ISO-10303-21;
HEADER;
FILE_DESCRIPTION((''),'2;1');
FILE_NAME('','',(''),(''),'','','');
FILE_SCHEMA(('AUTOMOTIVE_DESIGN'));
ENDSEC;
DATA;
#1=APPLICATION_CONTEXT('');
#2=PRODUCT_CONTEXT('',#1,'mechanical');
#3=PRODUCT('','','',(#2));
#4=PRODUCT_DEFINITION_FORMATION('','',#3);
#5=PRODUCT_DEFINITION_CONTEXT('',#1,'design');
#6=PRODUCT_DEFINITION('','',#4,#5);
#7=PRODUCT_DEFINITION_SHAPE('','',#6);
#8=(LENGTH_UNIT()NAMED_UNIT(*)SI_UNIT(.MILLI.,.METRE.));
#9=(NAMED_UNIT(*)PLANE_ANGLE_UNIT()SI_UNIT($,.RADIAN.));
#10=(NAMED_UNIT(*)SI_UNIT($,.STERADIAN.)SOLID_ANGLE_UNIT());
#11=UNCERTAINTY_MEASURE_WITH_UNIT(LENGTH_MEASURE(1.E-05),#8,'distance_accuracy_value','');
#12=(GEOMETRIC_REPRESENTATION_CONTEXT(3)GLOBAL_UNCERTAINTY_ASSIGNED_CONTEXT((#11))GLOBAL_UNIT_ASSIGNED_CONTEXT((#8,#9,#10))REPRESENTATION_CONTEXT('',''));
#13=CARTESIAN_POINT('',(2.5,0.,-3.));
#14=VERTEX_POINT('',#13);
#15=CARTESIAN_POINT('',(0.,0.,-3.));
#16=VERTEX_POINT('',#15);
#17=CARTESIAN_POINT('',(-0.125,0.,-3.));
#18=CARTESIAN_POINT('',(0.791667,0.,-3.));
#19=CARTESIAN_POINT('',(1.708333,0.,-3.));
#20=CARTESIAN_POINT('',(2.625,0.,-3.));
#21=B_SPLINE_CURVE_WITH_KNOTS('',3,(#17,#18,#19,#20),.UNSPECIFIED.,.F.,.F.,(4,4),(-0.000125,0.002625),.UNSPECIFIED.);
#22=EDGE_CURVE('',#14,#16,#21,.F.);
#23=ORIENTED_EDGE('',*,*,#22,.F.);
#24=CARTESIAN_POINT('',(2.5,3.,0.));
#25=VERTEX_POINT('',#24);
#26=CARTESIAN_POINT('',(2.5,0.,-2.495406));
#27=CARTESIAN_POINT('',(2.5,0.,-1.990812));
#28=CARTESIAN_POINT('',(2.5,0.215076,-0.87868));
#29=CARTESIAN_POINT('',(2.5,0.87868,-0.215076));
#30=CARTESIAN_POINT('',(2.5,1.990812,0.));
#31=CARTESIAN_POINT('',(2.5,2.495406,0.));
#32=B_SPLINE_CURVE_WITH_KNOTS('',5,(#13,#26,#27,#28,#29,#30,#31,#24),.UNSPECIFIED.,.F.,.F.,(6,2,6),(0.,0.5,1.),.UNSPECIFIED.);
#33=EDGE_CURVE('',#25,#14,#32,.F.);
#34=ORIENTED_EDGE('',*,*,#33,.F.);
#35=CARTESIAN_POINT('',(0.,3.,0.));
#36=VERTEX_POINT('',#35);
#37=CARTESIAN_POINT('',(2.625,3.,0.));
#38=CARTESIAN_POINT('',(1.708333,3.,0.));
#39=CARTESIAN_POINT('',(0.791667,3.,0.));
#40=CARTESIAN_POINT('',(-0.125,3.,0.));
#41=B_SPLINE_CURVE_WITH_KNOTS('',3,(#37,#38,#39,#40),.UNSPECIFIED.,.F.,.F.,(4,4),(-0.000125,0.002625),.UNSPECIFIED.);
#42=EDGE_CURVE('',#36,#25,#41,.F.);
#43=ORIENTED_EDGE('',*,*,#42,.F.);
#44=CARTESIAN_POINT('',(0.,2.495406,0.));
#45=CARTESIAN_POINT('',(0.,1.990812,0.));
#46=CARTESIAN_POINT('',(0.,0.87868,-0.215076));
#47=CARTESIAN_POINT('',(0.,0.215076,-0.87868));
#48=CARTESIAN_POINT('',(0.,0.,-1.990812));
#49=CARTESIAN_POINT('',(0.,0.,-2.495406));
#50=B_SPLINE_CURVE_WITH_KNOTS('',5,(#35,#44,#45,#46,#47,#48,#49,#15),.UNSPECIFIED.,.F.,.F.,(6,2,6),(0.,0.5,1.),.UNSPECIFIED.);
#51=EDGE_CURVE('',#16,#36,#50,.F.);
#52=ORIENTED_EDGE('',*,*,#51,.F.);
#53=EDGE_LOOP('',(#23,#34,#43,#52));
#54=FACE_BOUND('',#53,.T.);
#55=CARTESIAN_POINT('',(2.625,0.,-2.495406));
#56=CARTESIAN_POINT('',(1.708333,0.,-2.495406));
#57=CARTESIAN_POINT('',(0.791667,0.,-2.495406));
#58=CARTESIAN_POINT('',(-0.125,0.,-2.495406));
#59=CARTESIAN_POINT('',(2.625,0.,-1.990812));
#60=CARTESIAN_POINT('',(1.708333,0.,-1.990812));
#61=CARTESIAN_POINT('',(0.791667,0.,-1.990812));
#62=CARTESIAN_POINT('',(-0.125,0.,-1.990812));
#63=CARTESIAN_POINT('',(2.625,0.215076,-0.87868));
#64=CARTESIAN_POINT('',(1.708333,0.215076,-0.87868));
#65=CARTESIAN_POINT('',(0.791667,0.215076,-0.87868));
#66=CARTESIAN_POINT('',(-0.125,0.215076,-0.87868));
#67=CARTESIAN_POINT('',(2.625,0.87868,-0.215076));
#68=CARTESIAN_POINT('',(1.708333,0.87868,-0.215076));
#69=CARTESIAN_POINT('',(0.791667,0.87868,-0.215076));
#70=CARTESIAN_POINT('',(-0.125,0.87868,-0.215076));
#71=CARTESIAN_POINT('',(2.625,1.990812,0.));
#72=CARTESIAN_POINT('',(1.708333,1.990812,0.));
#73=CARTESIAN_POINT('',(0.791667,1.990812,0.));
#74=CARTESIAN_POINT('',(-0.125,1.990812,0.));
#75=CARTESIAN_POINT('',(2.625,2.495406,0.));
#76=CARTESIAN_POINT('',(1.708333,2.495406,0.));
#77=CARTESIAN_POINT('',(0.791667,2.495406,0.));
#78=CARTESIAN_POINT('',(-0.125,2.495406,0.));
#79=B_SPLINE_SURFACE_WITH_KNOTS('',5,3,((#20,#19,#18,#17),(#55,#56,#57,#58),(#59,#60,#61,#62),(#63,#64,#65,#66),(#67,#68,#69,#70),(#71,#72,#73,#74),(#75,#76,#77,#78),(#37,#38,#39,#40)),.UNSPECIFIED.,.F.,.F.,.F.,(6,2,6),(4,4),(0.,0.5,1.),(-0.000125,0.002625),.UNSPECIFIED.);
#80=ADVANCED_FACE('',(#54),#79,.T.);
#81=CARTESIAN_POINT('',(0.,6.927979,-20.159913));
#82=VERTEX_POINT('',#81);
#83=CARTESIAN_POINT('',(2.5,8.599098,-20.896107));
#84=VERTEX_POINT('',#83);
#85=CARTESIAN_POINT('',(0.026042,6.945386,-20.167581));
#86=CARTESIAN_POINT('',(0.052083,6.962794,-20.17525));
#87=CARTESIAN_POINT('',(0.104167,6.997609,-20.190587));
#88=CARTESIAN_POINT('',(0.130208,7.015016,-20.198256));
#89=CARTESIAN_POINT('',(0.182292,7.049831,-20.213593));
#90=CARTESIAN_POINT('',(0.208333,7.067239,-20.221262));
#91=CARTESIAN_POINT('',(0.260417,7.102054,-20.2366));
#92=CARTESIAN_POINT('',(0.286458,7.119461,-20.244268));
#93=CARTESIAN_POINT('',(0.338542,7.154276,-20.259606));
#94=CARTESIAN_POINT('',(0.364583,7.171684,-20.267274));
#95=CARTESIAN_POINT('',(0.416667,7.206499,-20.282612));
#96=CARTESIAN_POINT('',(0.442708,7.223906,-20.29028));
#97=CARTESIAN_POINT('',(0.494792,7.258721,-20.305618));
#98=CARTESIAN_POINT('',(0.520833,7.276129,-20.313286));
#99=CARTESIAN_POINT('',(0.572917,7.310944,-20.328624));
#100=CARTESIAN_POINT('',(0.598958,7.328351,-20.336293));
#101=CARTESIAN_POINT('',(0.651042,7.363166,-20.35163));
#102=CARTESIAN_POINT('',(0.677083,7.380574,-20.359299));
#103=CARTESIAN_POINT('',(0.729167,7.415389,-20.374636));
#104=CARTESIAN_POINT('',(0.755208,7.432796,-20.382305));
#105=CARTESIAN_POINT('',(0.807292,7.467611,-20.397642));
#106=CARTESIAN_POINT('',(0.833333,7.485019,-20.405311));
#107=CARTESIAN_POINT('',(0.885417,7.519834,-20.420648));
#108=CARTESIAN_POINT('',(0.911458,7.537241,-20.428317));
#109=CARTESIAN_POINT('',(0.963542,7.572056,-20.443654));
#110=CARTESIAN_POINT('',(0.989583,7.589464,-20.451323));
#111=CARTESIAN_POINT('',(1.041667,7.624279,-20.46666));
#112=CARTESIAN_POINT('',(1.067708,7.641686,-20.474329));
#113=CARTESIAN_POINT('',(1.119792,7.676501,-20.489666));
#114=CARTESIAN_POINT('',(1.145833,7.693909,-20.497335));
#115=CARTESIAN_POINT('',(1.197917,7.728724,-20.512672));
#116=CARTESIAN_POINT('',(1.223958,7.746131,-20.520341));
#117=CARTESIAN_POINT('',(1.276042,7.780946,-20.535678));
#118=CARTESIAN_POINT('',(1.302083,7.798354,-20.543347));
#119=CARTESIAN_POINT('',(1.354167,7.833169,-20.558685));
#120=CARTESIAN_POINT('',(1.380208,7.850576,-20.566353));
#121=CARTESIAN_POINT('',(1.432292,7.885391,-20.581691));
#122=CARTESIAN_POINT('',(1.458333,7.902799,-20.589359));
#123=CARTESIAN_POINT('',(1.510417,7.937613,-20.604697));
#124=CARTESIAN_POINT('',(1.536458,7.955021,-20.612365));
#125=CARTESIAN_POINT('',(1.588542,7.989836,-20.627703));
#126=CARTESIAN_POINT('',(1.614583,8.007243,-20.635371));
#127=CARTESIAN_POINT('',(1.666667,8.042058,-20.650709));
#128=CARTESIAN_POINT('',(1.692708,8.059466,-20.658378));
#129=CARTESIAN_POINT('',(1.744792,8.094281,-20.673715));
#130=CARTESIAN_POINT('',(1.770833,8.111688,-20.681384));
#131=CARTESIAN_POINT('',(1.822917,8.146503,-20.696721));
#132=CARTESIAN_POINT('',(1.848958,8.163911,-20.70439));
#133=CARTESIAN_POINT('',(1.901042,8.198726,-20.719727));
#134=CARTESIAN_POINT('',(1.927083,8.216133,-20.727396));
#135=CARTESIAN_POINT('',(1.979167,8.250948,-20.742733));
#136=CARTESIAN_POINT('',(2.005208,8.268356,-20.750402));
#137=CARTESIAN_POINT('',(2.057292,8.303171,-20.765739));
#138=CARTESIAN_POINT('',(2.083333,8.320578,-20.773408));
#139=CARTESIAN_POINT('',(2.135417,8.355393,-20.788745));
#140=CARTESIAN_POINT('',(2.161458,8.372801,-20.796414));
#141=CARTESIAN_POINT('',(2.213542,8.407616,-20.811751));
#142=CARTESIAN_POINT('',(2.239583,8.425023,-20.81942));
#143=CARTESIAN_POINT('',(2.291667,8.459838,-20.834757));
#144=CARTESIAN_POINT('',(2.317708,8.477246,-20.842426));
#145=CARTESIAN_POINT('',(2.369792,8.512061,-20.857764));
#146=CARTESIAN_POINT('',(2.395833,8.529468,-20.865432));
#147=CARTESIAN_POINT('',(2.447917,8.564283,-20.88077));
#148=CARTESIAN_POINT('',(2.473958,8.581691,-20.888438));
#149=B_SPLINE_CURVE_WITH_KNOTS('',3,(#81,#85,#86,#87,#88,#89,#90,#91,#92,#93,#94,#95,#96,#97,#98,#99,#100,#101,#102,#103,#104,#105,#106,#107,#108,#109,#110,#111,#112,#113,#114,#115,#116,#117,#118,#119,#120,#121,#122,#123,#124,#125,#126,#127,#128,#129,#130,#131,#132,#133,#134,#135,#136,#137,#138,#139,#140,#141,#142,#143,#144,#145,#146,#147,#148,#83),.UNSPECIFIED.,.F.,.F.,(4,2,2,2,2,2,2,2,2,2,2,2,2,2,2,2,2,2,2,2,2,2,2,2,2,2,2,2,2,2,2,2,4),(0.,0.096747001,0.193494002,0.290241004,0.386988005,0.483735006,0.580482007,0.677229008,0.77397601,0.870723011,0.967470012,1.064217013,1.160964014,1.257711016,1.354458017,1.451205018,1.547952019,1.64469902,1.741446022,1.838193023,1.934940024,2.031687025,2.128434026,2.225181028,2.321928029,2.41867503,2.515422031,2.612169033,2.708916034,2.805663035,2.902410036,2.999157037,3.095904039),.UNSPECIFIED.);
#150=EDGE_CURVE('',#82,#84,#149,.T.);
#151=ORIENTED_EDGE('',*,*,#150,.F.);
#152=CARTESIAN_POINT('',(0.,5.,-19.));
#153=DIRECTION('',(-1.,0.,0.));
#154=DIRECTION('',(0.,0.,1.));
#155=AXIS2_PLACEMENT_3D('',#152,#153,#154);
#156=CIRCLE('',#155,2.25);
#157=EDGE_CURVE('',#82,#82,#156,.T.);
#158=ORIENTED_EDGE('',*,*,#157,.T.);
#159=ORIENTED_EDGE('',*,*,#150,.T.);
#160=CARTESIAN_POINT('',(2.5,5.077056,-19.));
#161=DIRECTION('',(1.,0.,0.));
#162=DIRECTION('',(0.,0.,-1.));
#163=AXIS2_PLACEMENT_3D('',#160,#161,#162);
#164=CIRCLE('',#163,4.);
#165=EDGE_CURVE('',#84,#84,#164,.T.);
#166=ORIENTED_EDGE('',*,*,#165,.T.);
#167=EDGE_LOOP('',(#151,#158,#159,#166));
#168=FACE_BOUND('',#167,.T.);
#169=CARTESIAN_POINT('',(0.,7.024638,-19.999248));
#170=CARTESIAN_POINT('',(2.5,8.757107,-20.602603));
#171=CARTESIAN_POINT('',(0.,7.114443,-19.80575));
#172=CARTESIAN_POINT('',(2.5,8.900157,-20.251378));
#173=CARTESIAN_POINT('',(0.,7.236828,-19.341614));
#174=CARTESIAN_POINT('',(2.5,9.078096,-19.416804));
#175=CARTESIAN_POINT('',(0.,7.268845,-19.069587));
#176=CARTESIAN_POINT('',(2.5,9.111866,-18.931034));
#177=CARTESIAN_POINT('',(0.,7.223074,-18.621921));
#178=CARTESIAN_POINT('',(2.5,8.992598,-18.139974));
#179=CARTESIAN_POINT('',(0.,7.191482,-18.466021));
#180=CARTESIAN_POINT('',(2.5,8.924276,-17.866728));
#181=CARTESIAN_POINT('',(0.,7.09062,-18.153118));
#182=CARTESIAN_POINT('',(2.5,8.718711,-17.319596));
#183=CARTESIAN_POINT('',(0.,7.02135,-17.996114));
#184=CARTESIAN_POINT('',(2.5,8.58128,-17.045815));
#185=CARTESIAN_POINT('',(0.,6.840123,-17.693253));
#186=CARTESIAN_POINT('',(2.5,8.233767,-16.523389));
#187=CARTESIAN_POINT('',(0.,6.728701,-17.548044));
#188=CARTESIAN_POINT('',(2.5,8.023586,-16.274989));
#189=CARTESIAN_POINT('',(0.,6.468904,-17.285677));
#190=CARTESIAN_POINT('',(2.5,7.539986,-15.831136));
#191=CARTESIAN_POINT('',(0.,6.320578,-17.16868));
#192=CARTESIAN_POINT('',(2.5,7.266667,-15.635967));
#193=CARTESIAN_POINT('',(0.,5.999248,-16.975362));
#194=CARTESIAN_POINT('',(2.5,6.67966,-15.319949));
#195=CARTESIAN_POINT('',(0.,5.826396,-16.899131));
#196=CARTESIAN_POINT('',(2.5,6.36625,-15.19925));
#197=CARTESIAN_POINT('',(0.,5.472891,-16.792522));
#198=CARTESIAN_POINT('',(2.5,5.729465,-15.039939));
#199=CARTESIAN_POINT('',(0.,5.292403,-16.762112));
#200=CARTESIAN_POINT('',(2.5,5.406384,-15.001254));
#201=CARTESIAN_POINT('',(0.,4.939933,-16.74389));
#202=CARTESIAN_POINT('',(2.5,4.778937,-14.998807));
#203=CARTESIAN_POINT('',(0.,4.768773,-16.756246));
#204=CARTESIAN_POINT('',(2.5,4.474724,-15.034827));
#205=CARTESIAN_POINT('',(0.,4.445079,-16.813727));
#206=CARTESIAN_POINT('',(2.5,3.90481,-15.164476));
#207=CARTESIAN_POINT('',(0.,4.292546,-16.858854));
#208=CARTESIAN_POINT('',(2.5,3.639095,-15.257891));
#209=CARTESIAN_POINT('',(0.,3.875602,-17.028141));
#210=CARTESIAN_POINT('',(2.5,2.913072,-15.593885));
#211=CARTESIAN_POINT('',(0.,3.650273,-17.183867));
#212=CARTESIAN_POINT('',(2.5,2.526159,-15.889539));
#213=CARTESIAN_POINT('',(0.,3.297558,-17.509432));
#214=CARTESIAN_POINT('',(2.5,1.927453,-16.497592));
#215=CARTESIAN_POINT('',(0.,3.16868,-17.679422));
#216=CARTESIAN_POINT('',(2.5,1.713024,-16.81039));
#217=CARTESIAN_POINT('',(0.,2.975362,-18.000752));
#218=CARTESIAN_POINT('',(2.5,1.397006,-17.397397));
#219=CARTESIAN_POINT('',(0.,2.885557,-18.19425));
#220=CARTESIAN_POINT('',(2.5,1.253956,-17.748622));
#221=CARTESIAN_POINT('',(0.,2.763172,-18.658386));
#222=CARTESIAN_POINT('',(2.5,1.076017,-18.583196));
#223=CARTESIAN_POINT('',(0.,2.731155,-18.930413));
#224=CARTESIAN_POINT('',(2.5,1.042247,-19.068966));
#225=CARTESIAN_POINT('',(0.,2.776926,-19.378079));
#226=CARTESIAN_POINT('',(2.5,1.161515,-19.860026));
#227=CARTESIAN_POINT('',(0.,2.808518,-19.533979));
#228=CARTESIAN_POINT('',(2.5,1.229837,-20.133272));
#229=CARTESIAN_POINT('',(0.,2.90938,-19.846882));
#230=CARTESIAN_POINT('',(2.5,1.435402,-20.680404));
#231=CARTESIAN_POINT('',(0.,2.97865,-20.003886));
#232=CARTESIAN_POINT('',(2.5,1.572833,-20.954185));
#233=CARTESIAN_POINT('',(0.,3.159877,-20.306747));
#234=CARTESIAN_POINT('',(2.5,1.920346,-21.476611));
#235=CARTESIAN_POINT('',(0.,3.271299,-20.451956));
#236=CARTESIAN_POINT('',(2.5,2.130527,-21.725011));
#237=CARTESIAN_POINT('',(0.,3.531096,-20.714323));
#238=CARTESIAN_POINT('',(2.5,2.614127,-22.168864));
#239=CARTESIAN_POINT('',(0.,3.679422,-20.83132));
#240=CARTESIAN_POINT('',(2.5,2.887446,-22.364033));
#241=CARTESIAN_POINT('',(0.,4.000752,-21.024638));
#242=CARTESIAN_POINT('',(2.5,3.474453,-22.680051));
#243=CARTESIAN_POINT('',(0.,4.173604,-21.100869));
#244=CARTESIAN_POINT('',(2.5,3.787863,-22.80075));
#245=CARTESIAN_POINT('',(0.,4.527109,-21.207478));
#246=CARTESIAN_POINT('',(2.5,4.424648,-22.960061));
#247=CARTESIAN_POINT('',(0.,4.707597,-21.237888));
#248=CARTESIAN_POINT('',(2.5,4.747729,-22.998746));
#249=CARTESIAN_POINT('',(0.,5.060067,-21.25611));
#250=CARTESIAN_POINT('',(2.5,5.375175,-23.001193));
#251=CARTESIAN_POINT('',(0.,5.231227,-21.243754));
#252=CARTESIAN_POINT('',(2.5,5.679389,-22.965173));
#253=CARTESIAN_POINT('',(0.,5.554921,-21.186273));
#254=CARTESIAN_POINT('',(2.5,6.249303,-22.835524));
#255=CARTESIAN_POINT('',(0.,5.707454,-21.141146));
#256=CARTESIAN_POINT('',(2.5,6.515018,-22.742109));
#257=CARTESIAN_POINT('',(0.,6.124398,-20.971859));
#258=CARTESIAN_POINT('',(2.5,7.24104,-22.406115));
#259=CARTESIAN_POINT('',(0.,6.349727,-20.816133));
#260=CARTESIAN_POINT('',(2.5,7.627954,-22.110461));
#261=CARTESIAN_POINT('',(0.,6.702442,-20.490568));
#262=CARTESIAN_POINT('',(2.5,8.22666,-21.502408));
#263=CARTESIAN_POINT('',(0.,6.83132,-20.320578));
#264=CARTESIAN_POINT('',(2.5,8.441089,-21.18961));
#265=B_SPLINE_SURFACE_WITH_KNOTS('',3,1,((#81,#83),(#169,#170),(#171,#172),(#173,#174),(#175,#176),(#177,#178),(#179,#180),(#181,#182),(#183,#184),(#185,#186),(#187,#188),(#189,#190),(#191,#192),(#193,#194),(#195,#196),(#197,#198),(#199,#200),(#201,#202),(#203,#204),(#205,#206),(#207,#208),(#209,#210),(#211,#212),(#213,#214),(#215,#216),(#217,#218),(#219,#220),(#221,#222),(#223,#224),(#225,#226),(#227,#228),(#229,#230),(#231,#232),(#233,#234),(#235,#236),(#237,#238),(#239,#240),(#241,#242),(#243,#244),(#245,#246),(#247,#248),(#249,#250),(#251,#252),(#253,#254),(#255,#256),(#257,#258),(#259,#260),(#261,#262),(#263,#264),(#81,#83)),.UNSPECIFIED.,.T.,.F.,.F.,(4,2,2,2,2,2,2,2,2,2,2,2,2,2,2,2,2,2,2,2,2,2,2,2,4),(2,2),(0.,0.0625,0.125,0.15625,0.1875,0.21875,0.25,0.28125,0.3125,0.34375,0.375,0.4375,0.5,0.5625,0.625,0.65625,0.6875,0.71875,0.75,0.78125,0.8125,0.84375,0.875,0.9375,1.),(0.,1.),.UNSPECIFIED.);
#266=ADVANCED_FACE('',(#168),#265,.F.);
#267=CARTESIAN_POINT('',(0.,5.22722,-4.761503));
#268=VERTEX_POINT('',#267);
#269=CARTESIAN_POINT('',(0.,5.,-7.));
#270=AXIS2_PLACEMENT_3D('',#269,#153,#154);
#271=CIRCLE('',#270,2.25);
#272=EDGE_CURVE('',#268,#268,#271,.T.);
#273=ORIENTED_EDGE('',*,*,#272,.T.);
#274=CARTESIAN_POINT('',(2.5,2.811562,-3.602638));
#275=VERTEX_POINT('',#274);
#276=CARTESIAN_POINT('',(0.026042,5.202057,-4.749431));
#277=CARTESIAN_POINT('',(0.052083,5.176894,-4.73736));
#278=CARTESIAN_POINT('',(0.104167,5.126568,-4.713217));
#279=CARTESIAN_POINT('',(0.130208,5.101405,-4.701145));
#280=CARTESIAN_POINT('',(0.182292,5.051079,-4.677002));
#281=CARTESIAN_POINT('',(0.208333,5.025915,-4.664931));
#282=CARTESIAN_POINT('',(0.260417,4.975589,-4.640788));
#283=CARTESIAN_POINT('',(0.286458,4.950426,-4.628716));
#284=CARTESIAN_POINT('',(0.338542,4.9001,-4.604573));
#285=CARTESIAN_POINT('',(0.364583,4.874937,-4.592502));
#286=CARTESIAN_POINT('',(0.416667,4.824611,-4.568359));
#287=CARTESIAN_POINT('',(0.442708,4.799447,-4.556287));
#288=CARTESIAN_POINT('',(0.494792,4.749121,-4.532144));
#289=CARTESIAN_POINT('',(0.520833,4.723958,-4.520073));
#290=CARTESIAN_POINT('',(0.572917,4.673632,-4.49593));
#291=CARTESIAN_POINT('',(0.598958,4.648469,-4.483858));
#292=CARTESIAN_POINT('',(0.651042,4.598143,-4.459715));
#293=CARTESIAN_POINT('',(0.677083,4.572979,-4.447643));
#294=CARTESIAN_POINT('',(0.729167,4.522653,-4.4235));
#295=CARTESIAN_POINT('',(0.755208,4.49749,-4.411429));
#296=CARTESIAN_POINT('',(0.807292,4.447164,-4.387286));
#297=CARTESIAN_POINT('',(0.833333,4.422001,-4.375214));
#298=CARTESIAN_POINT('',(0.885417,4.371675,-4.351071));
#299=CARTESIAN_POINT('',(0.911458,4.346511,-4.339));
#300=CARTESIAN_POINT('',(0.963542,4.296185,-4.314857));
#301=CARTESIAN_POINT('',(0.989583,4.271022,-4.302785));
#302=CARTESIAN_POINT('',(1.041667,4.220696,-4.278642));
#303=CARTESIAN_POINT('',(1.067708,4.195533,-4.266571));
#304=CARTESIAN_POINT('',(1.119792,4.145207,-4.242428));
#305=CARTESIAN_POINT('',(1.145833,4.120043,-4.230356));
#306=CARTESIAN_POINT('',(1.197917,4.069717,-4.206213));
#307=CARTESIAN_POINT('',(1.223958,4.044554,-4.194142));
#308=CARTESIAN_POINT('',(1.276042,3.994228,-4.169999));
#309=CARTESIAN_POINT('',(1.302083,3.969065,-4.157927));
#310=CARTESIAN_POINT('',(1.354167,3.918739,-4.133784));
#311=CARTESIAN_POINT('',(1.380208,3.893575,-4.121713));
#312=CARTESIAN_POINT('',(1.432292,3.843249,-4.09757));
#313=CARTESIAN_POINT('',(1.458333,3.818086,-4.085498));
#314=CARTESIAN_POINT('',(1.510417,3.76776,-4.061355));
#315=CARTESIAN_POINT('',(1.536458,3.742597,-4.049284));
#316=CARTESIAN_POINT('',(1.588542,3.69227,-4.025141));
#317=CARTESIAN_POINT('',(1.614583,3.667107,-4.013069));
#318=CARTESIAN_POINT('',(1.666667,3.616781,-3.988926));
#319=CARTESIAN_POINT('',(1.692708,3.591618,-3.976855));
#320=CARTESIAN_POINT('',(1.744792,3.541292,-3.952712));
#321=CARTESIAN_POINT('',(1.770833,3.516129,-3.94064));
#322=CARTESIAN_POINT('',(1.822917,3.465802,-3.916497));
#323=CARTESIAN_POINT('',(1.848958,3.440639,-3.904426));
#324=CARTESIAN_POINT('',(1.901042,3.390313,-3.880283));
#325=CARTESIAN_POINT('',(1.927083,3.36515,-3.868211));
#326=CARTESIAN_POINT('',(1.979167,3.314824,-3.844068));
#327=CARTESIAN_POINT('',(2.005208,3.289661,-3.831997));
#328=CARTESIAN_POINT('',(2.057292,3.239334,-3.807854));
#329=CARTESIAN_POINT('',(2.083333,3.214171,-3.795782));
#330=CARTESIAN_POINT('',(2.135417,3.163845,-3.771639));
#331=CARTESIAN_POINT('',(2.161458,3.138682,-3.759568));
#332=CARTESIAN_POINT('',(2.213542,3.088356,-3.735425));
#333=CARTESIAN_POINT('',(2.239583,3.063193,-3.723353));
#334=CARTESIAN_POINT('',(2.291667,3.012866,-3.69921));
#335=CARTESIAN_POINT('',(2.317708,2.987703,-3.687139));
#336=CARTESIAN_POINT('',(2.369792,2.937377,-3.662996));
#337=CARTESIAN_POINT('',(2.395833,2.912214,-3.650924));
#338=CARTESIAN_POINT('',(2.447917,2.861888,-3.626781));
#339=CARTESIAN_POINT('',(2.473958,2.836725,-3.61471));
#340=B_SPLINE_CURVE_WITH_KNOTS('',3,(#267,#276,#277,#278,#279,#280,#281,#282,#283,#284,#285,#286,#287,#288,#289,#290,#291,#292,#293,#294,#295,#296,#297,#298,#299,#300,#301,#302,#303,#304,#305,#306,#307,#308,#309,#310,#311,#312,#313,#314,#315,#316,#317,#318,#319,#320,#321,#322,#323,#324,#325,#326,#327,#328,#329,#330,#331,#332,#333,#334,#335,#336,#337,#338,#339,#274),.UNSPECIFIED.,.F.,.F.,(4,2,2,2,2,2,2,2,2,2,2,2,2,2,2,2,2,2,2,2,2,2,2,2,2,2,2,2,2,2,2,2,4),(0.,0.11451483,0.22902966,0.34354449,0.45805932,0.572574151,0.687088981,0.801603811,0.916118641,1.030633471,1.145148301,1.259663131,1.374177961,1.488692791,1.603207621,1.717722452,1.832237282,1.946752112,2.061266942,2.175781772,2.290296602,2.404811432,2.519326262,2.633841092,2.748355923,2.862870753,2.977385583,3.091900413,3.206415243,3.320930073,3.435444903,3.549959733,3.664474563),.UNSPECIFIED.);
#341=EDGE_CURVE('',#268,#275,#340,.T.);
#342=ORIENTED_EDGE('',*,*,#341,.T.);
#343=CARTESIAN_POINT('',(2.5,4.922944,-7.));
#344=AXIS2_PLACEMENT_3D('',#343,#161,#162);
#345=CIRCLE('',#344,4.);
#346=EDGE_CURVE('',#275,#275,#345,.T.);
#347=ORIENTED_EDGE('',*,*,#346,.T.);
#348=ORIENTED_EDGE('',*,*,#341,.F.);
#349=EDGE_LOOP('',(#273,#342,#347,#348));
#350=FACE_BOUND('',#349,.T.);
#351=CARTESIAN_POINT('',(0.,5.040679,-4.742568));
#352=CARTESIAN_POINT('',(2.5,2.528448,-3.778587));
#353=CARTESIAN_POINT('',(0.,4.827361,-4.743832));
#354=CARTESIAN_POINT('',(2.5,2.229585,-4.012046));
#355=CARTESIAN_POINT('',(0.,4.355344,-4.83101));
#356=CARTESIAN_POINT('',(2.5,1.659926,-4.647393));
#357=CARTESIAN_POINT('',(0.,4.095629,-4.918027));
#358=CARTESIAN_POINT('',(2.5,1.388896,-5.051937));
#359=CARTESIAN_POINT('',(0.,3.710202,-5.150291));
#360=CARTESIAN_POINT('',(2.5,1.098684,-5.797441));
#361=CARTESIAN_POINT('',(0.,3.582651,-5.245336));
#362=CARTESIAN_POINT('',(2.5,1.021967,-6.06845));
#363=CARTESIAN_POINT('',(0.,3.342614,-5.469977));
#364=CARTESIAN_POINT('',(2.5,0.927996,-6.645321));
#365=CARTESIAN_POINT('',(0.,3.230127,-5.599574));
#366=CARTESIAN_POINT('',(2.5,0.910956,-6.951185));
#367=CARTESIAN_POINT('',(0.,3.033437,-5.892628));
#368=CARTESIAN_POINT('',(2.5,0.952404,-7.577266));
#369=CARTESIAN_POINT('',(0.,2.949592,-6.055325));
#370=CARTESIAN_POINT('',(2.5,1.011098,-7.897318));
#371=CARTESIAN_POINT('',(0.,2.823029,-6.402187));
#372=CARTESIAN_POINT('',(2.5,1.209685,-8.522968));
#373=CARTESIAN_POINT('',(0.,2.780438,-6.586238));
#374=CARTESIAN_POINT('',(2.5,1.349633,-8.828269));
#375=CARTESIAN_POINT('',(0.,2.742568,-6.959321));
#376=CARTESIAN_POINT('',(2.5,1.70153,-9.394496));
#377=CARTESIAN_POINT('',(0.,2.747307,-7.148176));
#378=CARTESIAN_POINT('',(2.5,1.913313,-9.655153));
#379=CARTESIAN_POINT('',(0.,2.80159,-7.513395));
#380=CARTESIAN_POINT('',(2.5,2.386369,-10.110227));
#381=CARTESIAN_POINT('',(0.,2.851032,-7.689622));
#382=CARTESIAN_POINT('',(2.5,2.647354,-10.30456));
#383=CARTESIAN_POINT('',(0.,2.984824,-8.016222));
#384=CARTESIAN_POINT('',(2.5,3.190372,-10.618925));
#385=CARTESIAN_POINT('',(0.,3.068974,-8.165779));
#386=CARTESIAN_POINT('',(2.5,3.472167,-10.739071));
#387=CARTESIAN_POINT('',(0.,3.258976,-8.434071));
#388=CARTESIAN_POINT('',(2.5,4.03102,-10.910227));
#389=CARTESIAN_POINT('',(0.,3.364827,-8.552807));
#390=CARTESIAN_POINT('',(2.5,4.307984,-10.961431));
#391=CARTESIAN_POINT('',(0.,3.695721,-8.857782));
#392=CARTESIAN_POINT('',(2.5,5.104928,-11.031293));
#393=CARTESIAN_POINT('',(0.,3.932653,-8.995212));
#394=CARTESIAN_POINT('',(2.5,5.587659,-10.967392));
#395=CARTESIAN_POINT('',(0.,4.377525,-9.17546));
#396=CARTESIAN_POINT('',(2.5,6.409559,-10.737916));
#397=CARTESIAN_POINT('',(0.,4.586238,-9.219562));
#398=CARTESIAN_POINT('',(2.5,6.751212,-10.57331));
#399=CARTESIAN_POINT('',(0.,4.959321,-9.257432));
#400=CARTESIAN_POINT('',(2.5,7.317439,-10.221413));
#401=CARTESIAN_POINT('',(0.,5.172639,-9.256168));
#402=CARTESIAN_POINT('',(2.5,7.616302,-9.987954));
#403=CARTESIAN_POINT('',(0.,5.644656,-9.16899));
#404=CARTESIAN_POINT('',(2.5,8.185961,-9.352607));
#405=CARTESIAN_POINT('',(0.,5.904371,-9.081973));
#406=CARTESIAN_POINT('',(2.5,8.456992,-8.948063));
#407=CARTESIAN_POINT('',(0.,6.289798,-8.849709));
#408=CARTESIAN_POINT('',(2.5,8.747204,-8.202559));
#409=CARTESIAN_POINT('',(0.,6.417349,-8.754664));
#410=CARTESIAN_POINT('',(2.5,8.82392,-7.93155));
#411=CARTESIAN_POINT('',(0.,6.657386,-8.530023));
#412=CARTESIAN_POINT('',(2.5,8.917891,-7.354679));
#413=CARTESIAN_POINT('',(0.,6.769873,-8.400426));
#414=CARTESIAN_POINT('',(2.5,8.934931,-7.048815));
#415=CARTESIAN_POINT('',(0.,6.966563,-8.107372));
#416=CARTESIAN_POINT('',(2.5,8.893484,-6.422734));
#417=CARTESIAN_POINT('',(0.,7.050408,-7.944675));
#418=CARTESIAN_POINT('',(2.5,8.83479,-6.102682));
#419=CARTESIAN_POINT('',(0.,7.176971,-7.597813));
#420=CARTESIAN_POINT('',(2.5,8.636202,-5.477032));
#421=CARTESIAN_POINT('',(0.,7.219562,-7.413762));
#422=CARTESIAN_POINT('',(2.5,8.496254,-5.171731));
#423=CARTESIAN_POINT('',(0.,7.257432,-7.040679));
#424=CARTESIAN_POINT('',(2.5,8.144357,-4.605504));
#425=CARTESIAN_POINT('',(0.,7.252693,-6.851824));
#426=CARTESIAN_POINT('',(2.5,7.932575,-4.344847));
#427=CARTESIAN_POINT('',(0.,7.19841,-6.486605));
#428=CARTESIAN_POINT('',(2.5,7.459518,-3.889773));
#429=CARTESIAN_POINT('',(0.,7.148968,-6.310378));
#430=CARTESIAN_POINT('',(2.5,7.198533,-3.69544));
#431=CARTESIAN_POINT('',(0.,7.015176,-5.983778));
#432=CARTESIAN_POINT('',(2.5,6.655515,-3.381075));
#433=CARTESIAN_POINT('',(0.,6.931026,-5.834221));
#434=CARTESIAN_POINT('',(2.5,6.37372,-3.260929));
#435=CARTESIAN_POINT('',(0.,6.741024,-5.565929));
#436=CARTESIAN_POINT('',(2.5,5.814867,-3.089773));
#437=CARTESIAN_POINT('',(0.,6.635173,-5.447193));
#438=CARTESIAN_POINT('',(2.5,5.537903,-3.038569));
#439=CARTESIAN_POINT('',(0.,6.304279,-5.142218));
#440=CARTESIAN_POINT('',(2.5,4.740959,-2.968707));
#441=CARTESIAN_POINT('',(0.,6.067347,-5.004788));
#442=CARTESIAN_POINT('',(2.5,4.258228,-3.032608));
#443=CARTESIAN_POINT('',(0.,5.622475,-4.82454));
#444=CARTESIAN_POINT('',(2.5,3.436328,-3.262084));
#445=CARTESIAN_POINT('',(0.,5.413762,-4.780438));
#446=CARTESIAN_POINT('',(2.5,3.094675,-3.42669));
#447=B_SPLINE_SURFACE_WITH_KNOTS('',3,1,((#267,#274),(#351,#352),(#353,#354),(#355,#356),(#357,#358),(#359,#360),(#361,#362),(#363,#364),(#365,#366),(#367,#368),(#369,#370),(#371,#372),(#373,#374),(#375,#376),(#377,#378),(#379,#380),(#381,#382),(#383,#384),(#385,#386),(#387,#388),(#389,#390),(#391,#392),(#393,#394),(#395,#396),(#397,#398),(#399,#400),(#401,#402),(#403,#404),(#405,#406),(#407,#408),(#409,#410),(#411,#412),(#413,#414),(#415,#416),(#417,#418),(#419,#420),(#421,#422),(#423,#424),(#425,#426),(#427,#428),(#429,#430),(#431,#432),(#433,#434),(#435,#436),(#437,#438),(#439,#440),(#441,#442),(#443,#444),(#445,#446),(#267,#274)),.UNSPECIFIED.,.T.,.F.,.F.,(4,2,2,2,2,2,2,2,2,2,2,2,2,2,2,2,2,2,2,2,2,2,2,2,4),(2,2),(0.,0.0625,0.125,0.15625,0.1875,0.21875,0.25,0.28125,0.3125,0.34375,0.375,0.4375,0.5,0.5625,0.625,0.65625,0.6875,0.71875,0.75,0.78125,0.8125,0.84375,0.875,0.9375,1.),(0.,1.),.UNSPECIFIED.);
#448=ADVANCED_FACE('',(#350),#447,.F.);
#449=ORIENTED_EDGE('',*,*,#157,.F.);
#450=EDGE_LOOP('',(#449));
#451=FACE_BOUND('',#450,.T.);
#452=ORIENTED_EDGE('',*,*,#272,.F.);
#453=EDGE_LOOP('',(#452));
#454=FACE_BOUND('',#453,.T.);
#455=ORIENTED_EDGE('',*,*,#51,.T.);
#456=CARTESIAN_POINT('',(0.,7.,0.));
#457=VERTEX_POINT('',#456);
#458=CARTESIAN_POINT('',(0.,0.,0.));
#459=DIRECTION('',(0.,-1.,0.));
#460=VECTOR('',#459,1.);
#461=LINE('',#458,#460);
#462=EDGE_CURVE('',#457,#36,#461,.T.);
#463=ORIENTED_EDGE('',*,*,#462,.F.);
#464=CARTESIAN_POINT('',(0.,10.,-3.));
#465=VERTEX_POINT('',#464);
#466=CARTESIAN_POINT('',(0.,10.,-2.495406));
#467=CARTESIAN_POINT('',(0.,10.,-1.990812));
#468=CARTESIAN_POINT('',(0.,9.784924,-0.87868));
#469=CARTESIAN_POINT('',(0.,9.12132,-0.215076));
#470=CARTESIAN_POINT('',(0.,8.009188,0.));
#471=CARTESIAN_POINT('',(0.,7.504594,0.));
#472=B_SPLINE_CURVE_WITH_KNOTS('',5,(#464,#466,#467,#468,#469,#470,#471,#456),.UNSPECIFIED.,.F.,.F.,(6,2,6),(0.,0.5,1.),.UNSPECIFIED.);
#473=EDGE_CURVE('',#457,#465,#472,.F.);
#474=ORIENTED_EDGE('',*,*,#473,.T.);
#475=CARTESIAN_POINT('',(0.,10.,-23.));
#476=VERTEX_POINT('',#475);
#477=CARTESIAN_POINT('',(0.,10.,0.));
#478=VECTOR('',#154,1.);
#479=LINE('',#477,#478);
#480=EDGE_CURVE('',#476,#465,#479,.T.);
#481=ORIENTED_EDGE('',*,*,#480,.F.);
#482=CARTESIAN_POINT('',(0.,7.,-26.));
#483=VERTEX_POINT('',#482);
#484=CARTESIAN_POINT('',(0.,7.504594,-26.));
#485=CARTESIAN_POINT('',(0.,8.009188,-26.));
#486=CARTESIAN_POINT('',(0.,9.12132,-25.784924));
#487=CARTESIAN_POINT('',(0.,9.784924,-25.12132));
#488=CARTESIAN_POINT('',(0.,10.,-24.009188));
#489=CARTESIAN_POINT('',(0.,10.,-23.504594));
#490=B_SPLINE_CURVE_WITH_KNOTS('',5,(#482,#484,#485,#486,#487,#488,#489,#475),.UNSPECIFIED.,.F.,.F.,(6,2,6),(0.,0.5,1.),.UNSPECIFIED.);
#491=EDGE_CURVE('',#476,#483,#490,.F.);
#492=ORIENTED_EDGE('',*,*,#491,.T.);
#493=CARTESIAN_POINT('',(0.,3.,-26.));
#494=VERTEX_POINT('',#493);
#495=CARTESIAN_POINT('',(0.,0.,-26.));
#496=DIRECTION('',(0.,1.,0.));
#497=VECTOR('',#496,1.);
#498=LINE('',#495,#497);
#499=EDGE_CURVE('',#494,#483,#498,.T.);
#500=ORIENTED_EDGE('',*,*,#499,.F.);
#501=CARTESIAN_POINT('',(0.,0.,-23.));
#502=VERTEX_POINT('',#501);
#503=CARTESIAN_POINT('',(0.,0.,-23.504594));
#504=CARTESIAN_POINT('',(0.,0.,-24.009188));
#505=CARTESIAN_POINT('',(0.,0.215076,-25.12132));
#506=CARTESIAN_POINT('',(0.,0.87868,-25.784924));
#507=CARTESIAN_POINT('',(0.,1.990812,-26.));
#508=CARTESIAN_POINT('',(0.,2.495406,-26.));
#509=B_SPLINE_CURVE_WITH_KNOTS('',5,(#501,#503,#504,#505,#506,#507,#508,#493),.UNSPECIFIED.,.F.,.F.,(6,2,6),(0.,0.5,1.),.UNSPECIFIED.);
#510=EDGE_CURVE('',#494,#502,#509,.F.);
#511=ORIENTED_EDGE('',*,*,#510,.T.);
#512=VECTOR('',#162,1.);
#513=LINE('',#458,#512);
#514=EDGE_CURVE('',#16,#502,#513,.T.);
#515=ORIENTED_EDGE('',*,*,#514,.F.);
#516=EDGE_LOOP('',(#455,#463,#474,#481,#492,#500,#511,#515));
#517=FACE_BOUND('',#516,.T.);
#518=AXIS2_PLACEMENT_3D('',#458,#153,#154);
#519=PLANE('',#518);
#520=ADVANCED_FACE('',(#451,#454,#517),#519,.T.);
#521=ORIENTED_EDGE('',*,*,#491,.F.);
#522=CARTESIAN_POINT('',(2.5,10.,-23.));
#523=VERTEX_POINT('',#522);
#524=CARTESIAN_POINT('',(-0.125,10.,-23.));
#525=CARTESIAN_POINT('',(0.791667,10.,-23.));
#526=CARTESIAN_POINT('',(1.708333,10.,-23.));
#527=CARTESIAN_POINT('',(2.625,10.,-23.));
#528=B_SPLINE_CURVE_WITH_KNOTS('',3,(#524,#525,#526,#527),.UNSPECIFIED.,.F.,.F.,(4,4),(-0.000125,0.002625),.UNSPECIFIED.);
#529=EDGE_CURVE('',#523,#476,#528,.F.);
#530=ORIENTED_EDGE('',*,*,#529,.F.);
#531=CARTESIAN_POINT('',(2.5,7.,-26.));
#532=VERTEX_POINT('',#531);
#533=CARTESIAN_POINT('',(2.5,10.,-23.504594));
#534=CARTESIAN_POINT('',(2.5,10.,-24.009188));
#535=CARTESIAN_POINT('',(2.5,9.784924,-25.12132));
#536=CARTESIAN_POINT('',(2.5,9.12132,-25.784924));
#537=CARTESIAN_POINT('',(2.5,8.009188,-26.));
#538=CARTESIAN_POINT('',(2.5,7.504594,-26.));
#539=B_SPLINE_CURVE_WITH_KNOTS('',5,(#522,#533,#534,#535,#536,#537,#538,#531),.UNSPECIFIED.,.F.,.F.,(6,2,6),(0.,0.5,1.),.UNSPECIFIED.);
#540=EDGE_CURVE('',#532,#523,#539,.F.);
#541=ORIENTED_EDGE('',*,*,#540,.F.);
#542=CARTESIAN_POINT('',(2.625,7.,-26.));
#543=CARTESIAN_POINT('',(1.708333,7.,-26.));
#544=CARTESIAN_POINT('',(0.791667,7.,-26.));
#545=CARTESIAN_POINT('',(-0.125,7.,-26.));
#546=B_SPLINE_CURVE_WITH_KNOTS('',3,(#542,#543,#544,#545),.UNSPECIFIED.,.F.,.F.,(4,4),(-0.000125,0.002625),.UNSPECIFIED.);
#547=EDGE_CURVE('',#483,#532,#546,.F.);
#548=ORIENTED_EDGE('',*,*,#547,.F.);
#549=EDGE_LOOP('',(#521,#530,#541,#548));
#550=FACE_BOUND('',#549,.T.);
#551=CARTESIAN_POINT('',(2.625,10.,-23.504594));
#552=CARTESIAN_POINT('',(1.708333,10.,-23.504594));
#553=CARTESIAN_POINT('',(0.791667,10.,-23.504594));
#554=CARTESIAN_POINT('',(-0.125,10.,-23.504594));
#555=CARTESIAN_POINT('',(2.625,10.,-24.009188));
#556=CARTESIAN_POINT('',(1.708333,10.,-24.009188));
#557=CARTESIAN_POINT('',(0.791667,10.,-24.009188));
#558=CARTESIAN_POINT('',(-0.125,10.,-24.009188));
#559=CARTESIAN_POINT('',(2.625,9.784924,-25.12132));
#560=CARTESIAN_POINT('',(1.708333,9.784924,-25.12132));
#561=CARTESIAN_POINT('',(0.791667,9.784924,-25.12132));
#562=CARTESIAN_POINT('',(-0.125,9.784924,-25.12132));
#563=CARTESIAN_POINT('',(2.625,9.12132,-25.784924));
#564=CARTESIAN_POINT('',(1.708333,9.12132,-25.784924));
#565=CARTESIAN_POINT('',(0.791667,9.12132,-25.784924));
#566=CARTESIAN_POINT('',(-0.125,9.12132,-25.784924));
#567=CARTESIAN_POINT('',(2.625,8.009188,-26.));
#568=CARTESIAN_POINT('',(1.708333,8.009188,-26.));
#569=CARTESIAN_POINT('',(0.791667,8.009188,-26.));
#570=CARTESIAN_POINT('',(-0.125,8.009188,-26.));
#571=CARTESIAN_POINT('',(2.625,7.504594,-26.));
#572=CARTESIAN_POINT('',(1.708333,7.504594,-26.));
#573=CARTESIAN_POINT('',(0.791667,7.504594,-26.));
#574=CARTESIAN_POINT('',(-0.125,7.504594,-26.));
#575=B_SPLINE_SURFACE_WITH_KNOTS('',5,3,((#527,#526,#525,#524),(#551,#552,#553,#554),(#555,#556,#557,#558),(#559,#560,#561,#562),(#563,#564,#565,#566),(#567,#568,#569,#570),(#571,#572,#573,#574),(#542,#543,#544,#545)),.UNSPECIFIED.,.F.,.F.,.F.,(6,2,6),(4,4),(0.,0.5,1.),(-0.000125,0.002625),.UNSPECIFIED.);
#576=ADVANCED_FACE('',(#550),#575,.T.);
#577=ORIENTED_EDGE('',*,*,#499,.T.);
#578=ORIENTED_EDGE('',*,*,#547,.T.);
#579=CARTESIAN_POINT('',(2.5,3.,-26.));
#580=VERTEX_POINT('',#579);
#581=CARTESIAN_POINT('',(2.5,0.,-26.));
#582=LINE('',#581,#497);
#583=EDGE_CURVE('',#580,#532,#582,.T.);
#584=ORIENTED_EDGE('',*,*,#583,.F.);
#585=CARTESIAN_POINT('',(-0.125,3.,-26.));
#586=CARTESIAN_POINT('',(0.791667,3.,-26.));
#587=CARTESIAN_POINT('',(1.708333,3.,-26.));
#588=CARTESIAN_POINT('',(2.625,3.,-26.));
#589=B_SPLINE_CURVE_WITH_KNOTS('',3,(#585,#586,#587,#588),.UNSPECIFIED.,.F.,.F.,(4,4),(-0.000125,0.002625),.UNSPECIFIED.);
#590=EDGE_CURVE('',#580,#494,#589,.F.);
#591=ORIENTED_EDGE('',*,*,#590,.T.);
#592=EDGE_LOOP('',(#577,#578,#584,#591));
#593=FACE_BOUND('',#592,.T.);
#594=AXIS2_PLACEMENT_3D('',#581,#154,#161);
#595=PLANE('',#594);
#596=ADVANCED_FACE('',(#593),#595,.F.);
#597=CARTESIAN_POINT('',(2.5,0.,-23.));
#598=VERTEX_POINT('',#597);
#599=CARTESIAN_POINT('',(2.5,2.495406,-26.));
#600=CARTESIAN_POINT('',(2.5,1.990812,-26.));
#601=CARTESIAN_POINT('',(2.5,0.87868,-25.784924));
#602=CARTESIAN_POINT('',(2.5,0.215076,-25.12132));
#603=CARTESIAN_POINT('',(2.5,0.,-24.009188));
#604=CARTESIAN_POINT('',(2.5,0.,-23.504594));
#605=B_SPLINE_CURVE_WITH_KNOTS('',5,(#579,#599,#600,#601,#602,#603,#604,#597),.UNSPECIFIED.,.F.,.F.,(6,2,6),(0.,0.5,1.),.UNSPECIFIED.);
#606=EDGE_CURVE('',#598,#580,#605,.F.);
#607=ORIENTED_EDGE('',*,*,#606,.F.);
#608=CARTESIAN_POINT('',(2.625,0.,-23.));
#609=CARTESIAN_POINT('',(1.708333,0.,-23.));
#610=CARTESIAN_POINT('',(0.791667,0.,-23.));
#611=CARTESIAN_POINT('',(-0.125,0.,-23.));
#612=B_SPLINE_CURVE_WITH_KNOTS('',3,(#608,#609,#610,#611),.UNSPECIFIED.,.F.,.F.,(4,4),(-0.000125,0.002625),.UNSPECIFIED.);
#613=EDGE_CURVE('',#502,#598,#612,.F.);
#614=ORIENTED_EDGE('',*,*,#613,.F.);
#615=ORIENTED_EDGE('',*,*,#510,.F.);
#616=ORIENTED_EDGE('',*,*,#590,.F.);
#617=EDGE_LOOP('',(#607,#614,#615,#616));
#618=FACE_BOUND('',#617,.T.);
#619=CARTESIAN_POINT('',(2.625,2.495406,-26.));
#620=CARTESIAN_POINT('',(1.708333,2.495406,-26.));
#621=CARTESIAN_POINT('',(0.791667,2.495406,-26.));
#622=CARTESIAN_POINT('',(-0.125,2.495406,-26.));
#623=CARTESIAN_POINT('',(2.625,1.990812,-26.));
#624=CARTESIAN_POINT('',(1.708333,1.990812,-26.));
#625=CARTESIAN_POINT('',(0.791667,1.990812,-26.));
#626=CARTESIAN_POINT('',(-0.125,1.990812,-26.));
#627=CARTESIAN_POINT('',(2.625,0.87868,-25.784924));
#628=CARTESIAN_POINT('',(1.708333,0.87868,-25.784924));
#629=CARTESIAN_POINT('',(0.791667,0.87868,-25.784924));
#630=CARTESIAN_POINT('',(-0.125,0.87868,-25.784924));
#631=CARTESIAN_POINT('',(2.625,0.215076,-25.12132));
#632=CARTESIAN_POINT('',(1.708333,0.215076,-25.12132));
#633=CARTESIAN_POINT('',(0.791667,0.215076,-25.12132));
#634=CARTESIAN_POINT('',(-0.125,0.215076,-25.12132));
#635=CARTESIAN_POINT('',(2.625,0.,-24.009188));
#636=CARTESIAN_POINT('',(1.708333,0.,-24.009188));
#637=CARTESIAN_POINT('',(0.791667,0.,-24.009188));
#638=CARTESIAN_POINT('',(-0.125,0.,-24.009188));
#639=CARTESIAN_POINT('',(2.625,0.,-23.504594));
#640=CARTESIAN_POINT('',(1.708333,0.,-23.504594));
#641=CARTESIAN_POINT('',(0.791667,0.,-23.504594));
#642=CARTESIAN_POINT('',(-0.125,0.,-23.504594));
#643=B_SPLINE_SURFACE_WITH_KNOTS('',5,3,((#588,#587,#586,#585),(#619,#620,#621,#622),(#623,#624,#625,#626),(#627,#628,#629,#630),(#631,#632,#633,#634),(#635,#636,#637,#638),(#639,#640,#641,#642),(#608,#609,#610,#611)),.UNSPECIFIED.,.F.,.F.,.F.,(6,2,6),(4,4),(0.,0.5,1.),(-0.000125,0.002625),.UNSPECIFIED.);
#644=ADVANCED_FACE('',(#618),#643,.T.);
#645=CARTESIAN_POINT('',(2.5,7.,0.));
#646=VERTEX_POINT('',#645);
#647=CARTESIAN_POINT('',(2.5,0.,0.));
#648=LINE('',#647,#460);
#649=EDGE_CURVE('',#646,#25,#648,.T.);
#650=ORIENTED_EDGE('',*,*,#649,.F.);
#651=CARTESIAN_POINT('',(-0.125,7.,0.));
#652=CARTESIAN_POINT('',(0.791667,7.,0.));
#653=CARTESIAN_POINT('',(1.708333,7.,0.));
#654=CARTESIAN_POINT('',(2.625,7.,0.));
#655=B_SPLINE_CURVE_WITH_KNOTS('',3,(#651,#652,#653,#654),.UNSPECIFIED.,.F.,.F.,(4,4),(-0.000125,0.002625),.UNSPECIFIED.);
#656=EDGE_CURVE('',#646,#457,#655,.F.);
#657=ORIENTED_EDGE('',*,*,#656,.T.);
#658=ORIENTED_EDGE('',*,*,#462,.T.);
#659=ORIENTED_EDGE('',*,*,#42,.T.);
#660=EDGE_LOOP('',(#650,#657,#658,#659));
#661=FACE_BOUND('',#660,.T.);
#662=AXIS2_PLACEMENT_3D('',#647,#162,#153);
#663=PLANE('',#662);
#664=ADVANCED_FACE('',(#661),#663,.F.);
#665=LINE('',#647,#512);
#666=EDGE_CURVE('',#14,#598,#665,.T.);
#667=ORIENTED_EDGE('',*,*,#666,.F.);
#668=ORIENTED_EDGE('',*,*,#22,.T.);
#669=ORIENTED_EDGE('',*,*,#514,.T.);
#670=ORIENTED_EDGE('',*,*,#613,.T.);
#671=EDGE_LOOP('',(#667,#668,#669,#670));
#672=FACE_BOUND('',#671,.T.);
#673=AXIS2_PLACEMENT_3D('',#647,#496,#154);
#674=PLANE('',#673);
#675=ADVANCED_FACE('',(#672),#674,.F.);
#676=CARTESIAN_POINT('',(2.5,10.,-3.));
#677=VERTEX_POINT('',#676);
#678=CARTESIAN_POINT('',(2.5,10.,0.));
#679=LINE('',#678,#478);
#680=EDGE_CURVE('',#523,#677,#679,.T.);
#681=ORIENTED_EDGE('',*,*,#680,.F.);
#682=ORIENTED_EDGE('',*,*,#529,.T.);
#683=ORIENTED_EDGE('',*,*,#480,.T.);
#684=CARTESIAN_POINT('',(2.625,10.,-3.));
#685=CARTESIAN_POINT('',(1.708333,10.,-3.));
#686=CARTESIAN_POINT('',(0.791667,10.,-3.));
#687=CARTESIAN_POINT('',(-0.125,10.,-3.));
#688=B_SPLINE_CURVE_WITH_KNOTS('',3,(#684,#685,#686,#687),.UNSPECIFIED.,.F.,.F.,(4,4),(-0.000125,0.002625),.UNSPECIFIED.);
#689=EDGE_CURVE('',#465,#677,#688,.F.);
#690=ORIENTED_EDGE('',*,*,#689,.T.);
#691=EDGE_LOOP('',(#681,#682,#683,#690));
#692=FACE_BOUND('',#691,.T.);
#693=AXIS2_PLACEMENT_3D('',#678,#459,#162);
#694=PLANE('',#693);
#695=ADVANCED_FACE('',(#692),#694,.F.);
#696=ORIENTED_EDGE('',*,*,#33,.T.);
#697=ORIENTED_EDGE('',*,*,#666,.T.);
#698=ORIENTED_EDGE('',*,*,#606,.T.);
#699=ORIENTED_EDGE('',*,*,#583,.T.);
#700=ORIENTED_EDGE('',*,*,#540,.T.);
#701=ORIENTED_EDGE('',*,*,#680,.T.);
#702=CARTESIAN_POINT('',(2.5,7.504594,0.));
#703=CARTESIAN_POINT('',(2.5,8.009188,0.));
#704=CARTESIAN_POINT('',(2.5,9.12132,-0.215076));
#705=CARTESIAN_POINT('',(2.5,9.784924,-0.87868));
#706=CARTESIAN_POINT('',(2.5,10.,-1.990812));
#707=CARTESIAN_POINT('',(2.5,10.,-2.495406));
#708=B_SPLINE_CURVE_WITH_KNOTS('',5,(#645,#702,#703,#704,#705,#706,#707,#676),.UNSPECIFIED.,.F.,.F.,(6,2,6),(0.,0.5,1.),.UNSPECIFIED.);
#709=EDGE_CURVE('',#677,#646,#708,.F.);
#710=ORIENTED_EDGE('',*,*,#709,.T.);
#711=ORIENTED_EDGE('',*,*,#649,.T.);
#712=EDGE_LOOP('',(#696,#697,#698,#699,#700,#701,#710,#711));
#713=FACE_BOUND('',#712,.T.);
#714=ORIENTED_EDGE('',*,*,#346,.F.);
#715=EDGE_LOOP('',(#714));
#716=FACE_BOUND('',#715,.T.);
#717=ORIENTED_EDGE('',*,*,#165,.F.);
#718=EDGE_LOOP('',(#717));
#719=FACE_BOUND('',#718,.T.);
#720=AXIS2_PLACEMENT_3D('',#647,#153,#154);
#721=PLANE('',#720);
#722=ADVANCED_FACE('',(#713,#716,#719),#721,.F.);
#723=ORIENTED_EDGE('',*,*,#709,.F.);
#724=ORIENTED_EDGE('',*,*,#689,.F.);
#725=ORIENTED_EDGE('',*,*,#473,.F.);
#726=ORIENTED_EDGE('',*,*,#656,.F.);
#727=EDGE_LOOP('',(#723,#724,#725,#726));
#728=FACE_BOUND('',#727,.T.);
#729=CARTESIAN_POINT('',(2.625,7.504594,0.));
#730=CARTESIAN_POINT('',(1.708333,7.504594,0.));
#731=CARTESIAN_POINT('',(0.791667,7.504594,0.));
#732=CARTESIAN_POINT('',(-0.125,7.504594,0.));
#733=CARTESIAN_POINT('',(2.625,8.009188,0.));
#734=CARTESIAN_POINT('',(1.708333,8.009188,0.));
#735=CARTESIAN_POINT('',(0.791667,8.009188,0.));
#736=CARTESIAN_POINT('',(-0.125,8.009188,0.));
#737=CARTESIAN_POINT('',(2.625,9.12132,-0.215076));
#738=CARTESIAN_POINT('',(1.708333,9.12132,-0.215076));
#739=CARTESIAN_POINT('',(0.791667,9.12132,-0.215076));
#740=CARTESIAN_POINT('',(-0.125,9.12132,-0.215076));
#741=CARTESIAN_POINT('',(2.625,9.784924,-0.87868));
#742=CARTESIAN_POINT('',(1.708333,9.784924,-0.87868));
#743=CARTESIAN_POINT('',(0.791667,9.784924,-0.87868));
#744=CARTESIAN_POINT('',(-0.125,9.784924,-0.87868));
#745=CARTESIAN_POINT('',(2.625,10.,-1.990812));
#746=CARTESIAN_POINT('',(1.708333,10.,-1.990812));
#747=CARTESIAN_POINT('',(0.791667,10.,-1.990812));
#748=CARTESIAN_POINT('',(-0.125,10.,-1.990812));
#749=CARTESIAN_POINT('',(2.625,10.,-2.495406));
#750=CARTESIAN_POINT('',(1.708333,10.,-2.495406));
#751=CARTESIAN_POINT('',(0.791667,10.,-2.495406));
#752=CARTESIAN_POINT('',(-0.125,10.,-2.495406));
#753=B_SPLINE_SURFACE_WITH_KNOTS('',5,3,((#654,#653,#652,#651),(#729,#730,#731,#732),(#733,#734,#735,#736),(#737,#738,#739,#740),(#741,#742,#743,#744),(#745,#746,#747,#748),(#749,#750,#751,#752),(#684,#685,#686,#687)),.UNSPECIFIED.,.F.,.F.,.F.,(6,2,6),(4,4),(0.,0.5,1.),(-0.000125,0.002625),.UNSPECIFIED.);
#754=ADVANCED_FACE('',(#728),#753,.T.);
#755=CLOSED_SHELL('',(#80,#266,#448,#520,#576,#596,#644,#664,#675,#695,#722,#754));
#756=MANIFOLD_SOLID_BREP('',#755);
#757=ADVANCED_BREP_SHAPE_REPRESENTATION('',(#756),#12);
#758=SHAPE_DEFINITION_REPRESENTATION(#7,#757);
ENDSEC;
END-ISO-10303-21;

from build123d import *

# Parameters (mm, degrees)
SKETCH1_W           = 26
SKETCH1_H           = 10
BOSS_EXTRUDE1_DEPTH = 2.5
FILLET1_SIZE        = 3
SKETCH4_5_R         = 2.25
SKETCH3_6_R         = 4


with BuildPart() as part:
    # Sketch1 → Boss-Extrude1 (new body)
    with BuildSketch(Plane(origin=(0, 0, 0), x_dir=(0, 0, -1), z_dir=(1, 0, 0))):
        with Locations((13, 5)):
            Rectangle(SKETCH1_W, SKETCH1_H)
    extrude(amount=BOSS_EXTRUDE1_DEPTH)

    # Fillet1
    # a fillet whose section is not a circle: 3 mm, written as the material it takes off along each edge
    with BuildSketch(Plane(origin=(-7.5, 10, 0), x_dir=(0, 0, -1), z_dir=(1, 0, 0)), Plane(origin=(-7.5, 0, -26), x_dir=(0, 0, 1), z_dir=(1, 0, 0)), Plane(origin=(-7.5, 10, -26), x_dir=(0, -1, 0), z_dir=(1, 0, 0))) as fillet1_piece_1:
        with BuildLine():
            add(Edge.make_bspline([(FILLET1_SIZE, 0), (FILLET1_SIZE * 0.831801948466, 0), (FILLET1_SIZE * 0.663603896932, 0), (FILLET1_SIZE * 0.292893218813, -FILLET1_SIZE * 0.0716919198361), (FILLET1_SIZE * 0.0716919198361, -FILLET1_SIZE * 0.292893218813), (0, -FILLET1_SIZE * 0.663603896932), (0, -FILLET1_SIZE * 0.831801948466), (0, -FILLET1_SIZE)], knots=[0, 0, 0, 0, 0, 0, 0.5, 0.5, 1, 1, 1, 1, 1, 1], degree=5))
            Line((0, -FILLET1_SIZE), (0, 0))
            Line((0, 0), (FILLET1_SIZE, 0))
        make_face()
    extrude(amount=17.5, mode=Mode.SUBTRACT)
    with BuildSketch(Plane(origin=(-7.5, 0, 0), x_dir=(0, 0, -1), z_dir=(1, 0, 0))) as fillet1_piece_2:
        with BuildLine():
            add(Edge.make_bspline([(FILLET1_SIZE, 0), (FILLET1_SIZE * 0.831801948466, 0), (FILLET1_SIZE * 0.663603896932, 0), (FILLET1_SIZE * 0.292893218813, FILLET1_SIZE * 0.0716919198361), (FILLET1_SIZE * 0.0716919198361, FILLET1_SIZE * 0.292893218813), (0, FILLET1_SIZE * 0.663603896932), (0, FILLET1_SIZE * 0.831801948466), (0, FILLET1_SIZE)], knots=[0, 0, 0, 0, 0, 0, 0.5, 0.5, 1, 1, 1, 1, 1, 1], degree=5))
            Line((0, FILLET1_SIZE), (0, 0))
            Line((0, 0), (FILLET1_SIZE, 0))
        make_face()
    extrude(amount=17.5, mode=Mode.SUBTRACT)

    # Cut-Loft1: read off the stored shape, not the designer's step
    # Cut-Loft1: loft between two sections, ruled curve by curve
    cut_loft1_from = [
        Edge.make_bspline([(0, 5.227220393, -4.761502537), (0, 5.040678937, -4.742567504), (0, 4.827360743, -4.743831636), (0, 4.355343831, -4.831009815), (0, 4.09562853, -4.918026839), (0, 3.710202489, -5.150291271), (0, 3.582651152, -5.2453356), (0, 3.342613634, -5.469976954), (0, 3.230127455, -5.599573979), (0, 3.033437391, -5.892627716), (0, 2.949592094, -6.055325315), (0, 2.823029016, -6.402187173), (0, 2.780437569, -6.586238152), (0, 2.742567504, -6.959321063), (0, 2.747306812, -7.148176386), (0, 2.801589604, -7.513395142), (0, 2.851032094, -7.68962222), (0, 2.984823778, -8.016221759), (0, 3.068974238, -8.165778536), (0, 3.258976095, -8.434071364), (0, 3.364827492, -8.552807416), (0, 3.695720639, -8.857782374), (0, 3.932653309, -8.995212029), (0, 4.377524958, -9.175459681), (0, 4.586238152, -9.219562431), (0, 4.959321063, -9.257432496), (0, 5.172639257, -9.256168364), (0, 5.644656169, -9.168990185), (0, 5.90437147, -9.081973161), (0, 6.289797511, -8.849708729), (0, 6.417348848, -8.7546644), (0, 6.657386366, -8.530023046), (0, 6.769872545, -8.400426021), (0, 6.966562609, -8.107372284), (0, 7.050407906, -7.944674685), (0, 7.176970984, -7.597812827), (0, 7.219562431, -7.413761848), (0, 7.257432496, -7.040678937), (0, 7.252693188, -6.851823614), (0, 7.198410396, -6.486604858), (0, 7.148967906, -6.31037778), (0, 7.015176222, -5.983778241), (0, 6.931025762, -5.834221464), (0, 6.741023905, -5.565928636), (0, 6.635172508, -5.447192584), (0, 6.304279361, -5.142217626), (0, 6.067346691, -5.004787971), (0, 5.622475042, -4.824540319), (0, 5.413761848, -4.780437569), (0, 5.227220393, -4.761502537)], [0, 0, 0, 0, 0.0625, 0.0625, 0.125, 0.125, 0.15625, 0.15625, 0.1875, 0.1875, 0.21875, 0.21875, 0.25, 0.25, 0.28125, 0.28125, 0.3125, 0.3125, 0.34375, 0.34375, 0.375, 0.375, 0.4375, 0.4375, 0.5, 0.5, 0.5625, 0.5625, 0.625, 0.625, 0.65625, 0.65625, 0.6875, 0.6875, 0.71875, 0.71875, 0.75, 0.75, 0.78125, 0.78125, 0.8125, 0.8125, 0.84375, 0.84375, 0.875, 0.875, 0.9375, 0.9375, 1, 1, 1, 1], 3),
    ]
    cut_loft1_to = [
        Edge.make_bspline([(2.5, 2.811561531, -3.602638399), (2.5, 2.528448064, -3.778586903), (2.5, 2.229585449, -4.012046448), (2.5, 1.65992568, -4.647393225), (2.5, 1.388895654, -5.051936935), (2.5, 1.098683643, -5.797441454), (2.5, 1.021967094, -6.068450115), (2.5, 0.927996054, -6.645321276), (2.5, 0.910956437, -6.951185481), (2.5, 0.952403615, -7.577266038), (2.5, 1.011097599, -7.897318025), (2.5, 1.209685139, -8.522967618), (2.5, 1.349633474, -8.828268581), (2.5, 1.701530482, -9.394495515), (2.5, 1.913312576, -9.655153449), (2.5, 2.386369409, -10.110226694), (2.5, 2.647353909, -10.30455978), (2.5, 3.19037235, -10.618925341), (2.5, 3.472167179, -10.739070815), (2.5, 4.031019985, -10.910226979), (2.5, 4.307984356, -10.961431088), (2.5, 5.104928058, -11.031293352), (2.5, 5.587659325, -10.967391766), (2.5, 6.409558868, -10.737916455), (2.5, 6.75121216, -10.573310105), (2.5, 7.317439093, -10.221413097), (2.5, 7.616301709, -9.987953552), (2.5, 8.185961477, -9.352606775), (2.5, 8.456991504, -8.948063065), (2.5, 8.747203514, -8.202558546), (2.5, 8.823920064, -7.931549885), (2.5, 8.917891104, -7.354678724), (2.5, 8.934930721, -7.048814519), (2.5, 8.893483543, -6.422733962), (2.5, 8.834789558, -6.102681975), (2.5, 8.636202018, -5.477032382), (2.5, 8.496253684, -5.171731419), (2.5, 8.144356676, -4.605504485), (2.5, 7.932574581, -4.344846551), (2.5, 7.459517749, -3.889773306), (2.5, 7.198533248, -3.69544022), (2.5, 6.655514807, -3.381074659), (2.5, 6.373719979, -3.260929185), (2.5, 5.814867172, -3.089773021), (2.5, 5.537902802, -3.038568912), (2.5, 4.7409591, -2.968706648), (2.5, 4.258227833, -3.032608234), (2.5, 3.436328289, -3.262083545), (2.5, 3.094674998, -3.426689895), (2.5, 2.811561531, -3.602638399)], [0, 0, 0, 0, 0.0625, 0.0625, 0.125, 0.125, 0.15625, 0.15625, 0.1875, 0.1875, 0.21875, 0.21875, 0.25, 0.25, 0.28125, 0.28125, 0.3125, 0.3125, 0.34375, 0.34375, 0.375, 0.375, 0.4375, 0.4375, 0.5, 0.5, 0.5625, 0.5625, 0.625, 0.625, 0.65625, 0.65625, 0.6875, 0.6875, 0.71875, 0.71875, 0.75, 0.75, 0.78125, 0.78125, 0.8125, 0.8125, 0.84375, 0.84375, 0.875, 0.875, 0.9375, 0.9375, 1, 1, 1, 1], 3),
    ]
    cut_loft1 = Solid(Shell([*[Face.make_surface_from_curves(cut_loft1_from[k], cut_loft1_to[k]) for k in range(1)], Face(Wire(cut_loft1_from)), Face(Wire(cut_loft1_to))]))
    add(cut_loft1, mode=Mode.SUBTRACT)

    # Sketch4<5> → Cut-Loft2 section 0
    with BuildSketch(Plane.ZY):
        with Locations((-19, 5)):
            Circle(SKETCH4_5_R)
    # Sketch3<6> → Cut-Loft2 section 1
    with BuildSketch(Plane(origin=(2.5, 0, 0), x_dir=(0, 0, -1), z_dir=(1, 0, 0))):
        with Locations((19, 5.077056421)):
            Circle(SKETCH3_6_R)
    loft(mode=Mode.SUBTRACT)


solid = part.part
